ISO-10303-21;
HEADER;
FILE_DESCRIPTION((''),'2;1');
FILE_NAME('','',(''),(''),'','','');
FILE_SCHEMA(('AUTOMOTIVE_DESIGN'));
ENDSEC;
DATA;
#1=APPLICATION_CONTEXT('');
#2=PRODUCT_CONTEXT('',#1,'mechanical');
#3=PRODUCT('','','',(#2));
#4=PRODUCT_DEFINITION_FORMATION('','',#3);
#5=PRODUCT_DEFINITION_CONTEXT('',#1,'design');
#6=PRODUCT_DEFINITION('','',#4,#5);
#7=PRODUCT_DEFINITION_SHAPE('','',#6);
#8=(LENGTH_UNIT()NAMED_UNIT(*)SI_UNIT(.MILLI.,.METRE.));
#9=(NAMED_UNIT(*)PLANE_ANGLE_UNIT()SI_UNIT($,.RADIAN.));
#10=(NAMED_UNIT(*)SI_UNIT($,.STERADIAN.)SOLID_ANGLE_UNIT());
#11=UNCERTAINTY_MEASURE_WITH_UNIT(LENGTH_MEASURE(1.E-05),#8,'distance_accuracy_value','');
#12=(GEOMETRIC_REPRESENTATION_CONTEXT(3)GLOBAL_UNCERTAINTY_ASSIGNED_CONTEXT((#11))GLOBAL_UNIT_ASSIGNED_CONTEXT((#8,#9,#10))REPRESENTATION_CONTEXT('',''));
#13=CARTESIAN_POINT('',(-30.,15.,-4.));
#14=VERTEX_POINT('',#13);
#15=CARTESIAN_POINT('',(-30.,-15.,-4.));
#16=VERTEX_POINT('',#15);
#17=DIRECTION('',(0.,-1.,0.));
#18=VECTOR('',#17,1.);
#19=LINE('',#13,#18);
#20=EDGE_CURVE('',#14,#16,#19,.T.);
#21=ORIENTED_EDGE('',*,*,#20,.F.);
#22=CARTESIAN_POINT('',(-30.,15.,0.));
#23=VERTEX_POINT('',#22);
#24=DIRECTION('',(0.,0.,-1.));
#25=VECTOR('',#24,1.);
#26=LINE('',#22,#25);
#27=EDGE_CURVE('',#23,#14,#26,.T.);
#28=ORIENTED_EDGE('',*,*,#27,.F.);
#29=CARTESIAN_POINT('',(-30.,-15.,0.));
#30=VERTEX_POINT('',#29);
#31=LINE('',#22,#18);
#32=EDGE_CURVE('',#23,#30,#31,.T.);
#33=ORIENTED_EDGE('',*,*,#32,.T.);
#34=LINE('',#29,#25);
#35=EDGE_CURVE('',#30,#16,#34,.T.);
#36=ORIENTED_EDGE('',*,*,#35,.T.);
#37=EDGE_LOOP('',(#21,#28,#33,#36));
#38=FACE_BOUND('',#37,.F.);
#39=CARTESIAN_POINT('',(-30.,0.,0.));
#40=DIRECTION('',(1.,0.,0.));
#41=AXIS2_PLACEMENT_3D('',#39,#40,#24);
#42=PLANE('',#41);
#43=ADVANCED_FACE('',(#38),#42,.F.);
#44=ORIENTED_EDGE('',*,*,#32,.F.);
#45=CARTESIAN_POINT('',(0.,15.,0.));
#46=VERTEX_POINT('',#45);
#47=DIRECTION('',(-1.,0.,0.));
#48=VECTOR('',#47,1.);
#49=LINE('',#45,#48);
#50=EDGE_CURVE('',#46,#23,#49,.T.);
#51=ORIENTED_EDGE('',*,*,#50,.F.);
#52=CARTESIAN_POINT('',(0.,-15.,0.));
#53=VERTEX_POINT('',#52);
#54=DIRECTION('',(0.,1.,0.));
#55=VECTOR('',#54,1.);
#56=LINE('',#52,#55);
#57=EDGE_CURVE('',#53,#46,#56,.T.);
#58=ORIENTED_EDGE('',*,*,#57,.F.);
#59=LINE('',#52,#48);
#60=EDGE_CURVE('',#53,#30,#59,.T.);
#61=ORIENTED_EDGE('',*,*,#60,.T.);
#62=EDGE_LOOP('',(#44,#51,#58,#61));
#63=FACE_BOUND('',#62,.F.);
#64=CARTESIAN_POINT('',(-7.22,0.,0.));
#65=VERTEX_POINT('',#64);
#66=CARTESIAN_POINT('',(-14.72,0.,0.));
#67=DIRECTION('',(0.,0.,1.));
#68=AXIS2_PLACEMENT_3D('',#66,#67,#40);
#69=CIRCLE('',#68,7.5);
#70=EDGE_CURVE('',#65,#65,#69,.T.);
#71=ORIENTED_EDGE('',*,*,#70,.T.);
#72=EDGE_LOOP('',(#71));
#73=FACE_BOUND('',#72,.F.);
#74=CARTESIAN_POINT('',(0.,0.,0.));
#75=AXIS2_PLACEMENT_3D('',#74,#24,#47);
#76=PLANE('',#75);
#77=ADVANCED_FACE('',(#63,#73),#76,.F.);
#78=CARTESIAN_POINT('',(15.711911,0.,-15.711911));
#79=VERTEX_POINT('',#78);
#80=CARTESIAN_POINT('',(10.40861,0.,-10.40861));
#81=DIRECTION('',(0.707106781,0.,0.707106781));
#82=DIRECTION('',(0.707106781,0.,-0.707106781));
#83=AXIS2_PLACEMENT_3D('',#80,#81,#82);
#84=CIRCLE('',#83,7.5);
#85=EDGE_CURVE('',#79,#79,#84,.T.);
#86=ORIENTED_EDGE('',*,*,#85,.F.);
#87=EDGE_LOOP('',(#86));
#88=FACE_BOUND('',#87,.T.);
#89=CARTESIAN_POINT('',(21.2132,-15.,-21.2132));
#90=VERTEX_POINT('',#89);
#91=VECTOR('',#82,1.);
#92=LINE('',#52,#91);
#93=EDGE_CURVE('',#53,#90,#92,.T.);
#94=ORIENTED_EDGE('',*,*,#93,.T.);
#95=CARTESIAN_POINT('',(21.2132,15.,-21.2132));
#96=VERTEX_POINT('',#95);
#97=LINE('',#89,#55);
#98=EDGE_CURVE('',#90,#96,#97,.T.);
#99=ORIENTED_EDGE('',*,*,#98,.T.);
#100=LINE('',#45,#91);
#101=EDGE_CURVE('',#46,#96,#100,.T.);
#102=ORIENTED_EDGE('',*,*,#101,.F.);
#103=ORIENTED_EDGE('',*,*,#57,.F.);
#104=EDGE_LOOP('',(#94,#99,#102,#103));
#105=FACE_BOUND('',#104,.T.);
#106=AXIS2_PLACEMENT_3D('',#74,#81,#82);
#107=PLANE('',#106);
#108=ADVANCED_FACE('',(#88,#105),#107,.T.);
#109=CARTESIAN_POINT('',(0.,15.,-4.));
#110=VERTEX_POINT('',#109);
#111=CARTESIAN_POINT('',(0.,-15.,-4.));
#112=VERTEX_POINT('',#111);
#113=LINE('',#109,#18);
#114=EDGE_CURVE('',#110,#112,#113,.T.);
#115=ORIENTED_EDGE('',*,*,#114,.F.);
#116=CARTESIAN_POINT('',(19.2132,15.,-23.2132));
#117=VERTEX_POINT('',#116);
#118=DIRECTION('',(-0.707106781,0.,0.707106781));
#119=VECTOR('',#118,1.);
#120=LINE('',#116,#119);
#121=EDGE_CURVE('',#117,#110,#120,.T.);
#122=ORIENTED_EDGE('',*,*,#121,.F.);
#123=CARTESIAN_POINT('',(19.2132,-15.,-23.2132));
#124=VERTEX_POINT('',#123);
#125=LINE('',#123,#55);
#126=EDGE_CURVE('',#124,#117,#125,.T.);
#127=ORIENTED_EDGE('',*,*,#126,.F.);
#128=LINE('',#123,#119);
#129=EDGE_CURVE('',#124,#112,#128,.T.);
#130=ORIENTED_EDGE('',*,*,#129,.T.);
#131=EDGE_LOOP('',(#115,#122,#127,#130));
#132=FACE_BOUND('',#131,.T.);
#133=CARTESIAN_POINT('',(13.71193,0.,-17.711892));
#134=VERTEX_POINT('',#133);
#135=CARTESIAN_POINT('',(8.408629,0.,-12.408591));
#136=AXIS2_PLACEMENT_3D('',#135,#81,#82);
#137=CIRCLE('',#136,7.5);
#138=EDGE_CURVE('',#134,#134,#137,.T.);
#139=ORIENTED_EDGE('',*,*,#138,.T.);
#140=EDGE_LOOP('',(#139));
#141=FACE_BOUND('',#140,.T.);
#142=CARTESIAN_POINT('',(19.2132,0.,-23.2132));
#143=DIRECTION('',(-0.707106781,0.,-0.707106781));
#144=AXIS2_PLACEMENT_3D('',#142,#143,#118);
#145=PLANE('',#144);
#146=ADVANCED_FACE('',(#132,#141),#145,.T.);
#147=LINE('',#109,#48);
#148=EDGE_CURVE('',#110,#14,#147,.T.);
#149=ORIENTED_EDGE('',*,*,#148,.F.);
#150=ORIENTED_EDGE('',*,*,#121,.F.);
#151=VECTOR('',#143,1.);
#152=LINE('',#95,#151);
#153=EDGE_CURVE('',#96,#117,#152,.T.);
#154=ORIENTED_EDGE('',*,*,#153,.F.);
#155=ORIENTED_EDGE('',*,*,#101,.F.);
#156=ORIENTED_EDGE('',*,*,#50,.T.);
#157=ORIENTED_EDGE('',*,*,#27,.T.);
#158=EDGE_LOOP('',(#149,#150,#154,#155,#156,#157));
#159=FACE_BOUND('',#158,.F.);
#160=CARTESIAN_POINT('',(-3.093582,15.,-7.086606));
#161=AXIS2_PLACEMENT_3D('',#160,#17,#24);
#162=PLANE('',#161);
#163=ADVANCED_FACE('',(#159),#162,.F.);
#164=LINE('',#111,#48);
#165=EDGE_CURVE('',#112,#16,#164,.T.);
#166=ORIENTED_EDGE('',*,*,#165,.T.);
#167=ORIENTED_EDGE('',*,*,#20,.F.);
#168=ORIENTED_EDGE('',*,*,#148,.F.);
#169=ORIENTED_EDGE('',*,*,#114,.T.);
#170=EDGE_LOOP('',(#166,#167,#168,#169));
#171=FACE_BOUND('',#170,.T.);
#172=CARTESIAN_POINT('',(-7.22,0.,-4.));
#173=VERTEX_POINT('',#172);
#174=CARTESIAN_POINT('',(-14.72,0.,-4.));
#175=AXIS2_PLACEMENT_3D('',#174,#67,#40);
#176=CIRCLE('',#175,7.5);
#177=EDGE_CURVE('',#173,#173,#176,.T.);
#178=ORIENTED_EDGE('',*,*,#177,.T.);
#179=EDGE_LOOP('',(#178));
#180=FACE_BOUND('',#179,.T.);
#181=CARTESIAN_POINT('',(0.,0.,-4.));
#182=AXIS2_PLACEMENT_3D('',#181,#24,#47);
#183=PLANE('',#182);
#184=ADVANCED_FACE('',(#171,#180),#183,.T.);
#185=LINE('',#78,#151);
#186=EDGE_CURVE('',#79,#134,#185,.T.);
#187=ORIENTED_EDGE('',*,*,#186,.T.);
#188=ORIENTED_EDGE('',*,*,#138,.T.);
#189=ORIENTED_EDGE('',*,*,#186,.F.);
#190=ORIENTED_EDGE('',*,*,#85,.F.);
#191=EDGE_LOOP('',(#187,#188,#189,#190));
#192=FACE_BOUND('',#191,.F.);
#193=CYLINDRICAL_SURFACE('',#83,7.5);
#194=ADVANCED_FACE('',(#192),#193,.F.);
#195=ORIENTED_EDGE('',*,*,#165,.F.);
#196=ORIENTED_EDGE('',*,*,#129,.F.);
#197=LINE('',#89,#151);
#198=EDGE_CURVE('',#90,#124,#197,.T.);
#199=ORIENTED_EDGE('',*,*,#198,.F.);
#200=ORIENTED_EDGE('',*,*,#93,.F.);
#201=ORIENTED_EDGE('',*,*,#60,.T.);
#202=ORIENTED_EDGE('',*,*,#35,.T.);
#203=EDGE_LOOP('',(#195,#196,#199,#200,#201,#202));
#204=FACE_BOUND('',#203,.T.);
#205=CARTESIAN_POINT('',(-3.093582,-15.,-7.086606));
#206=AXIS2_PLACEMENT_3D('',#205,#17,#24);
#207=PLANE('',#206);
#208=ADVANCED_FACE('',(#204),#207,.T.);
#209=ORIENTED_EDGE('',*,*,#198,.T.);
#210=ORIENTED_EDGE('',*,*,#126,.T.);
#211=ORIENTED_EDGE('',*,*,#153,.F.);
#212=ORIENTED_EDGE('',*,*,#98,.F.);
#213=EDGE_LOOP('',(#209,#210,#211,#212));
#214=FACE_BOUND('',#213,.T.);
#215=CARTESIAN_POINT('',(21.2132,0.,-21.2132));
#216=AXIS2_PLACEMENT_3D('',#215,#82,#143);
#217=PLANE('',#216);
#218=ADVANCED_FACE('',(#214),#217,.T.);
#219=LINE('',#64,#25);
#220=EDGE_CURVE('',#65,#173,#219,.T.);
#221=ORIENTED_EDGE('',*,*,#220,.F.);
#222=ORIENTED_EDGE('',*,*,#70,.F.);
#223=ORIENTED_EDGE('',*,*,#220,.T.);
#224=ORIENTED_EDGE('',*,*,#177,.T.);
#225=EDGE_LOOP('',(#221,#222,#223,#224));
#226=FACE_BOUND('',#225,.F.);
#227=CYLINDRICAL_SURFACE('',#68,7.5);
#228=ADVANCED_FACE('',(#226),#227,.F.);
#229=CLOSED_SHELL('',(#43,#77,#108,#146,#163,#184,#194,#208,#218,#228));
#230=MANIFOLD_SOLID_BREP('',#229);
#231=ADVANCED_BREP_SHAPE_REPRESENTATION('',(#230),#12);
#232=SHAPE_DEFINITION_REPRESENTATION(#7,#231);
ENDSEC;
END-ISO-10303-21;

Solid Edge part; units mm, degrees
sketch "Sketch1" plane through (0, 0, 0) normal (0, -1, 0) x (1, 0, 0)
  line L0 (0, 0) -> (-30, 0)
  line L1 (-30, 0) -> (-30, -4)
  line L2 (0, -4) -> (-30, -4)
  line L3 (19.2132, -23.2132) -> (0, -4)
  line L4 (21.2132, -21.2132) -> (19.2132, -23.2132)
  line L5 (0, 0) -> (21.2132, -21.2132)
  dimension "D1" = 4
  dimension "D2" = 30
  dimension "D3" = 30
extrude "Protrusion1" add sketch "Sketch1" along normal mid plane 30
sketch "Sketch2" plane through (-15, 0, 0) normal (0, 0, 1) x (1, 0, 0)
  circle A0 centre (0.28, 0) radius 7.5
  dimension "D1" = 15
  dimension "D2" = 14.72
extrude "Cutout1" cut sketch "Sketch2" against normal up to surface (4 mm away)
sketch "Sketch3" plane through (10.6066, 0, -10.6066) normal (0.7071068, 0, 0.7071068) x (0.7071068, 0, -0.7071068)
  circle A0 centre (-0.28, 0) radius 7.5
  dimension "D1" = 15
  dimension "D2" = 14.72
extrude "Cutout2" cut sketch "Sketch3" against normal up to surface (2.8284 mm away)
